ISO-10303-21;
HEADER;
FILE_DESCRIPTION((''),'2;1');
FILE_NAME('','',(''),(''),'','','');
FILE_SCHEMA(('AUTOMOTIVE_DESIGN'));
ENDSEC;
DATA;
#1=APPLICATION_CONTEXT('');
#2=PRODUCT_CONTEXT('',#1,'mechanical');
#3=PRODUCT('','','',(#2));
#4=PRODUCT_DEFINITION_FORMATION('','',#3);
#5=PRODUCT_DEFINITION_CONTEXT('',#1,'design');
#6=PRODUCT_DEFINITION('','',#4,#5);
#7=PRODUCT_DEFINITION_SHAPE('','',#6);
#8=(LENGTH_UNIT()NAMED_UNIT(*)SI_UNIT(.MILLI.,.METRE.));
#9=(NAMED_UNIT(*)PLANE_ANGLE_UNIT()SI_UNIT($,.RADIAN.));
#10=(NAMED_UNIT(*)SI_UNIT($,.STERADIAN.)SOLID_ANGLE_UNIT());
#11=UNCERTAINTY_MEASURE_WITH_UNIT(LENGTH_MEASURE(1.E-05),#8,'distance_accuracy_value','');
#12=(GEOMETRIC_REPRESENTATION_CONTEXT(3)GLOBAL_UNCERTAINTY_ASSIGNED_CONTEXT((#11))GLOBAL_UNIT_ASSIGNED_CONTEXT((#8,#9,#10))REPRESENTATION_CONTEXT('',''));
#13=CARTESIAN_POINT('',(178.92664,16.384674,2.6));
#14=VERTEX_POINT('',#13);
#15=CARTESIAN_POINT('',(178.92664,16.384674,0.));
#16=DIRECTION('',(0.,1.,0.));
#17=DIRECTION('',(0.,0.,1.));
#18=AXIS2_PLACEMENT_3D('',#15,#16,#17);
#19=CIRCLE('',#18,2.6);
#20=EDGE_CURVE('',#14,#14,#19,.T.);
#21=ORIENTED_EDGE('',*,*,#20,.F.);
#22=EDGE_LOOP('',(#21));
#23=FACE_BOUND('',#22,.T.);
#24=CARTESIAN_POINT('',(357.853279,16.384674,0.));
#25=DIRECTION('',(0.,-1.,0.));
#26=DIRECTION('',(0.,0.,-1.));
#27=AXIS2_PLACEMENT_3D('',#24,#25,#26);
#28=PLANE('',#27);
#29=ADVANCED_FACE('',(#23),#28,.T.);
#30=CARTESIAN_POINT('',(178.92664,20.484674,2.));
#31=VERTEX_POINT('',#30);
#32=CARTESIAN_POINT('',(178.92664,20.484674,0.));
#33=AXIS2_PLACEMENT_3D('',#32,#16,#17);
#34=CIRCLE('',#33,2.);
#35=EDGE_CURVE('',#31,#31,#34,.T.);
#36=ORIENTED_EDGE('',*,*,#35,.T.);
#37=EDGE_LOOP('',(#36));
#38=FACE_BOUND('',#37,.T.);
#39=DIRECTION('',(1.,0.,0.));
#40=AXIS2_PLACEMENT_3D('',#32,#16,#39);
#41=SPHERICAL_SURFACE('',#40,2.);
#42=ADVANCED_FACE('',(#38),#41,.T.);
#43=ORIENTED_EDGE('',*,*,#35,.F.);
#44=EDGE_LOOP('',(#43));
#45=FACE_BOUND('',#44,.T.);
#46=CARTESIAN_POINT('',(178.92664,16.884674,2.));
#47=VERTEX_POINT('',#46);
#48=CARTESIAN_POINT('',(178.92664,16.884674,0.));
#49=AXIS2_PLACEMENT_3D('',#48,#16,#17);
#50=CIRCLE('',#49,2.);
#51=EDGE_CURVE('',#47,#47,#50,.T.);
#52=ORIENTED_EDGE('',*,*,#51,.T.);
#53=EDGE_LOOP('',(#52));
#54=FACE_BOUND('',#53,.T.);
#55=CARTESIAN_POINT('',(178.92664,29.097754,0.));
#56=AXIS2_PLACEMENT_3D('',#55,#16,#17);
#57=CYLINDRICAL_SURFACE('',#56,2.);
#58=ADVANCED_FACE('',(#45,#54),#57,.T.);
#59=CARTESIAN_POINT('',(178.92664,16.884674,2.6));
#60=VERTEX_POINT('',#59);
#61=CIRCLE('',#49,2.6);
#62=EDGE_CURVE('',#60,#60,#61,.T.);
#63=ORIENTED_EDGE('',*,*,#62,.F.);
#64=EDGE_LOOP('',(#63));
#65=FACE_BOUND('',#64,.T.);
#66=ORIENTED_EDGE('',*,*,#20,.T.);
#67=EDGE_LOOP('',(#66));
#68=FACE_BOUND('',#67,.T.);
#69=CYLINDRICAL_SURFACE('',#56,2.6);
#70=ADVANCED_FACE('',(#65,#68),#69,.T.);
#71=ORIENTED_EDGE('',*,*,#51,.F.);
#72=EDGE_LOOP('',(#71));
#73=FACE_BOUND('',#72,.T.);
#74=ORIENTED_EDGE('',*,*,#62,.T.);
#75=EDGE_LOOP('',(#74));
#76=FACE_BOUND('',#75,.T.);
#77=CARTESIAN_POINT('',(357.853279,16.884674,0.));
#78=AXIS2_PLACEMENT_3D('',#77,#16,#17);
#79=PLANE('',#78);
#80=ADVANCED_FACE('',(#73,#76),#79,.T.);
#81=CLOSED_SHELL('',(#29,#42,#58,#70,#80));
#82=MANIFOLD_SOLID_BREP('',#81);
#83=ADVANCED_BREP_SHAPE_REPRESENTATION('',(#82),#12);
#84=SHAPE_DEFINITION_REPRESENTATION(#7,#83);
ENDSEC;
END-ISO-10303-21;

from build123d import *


with BuildPart() as part:
    # Sketch1 → Revolve1 (revolve)
    with BuildSketch(Plane.XY):
        with BuildLine():
            Line((176.926639519, 20.48467433), (176.926639519, 16.88467433))
            Line((176.926639519, 16.88467433), (176.326639519, 16.88467433))
            Line((176.326639519, 16.88467433), (176.326639519, 16.38467433))
            Line((176.326639519, 16.38467433), (178.926639519, 16.38467433))
            Line((178.926639519, 16.38467433), (178.926639519, 22.48467433))
            ThreePointArc((178.926639519, 22.48467433), (177.512425957, 21.898887892), (176.926639519, 20.48467433))
        make_face()
    revolve(axis=Axis((178.926639519, 29.097753813, 0), (0, -1, 0)))


solid = part.part
